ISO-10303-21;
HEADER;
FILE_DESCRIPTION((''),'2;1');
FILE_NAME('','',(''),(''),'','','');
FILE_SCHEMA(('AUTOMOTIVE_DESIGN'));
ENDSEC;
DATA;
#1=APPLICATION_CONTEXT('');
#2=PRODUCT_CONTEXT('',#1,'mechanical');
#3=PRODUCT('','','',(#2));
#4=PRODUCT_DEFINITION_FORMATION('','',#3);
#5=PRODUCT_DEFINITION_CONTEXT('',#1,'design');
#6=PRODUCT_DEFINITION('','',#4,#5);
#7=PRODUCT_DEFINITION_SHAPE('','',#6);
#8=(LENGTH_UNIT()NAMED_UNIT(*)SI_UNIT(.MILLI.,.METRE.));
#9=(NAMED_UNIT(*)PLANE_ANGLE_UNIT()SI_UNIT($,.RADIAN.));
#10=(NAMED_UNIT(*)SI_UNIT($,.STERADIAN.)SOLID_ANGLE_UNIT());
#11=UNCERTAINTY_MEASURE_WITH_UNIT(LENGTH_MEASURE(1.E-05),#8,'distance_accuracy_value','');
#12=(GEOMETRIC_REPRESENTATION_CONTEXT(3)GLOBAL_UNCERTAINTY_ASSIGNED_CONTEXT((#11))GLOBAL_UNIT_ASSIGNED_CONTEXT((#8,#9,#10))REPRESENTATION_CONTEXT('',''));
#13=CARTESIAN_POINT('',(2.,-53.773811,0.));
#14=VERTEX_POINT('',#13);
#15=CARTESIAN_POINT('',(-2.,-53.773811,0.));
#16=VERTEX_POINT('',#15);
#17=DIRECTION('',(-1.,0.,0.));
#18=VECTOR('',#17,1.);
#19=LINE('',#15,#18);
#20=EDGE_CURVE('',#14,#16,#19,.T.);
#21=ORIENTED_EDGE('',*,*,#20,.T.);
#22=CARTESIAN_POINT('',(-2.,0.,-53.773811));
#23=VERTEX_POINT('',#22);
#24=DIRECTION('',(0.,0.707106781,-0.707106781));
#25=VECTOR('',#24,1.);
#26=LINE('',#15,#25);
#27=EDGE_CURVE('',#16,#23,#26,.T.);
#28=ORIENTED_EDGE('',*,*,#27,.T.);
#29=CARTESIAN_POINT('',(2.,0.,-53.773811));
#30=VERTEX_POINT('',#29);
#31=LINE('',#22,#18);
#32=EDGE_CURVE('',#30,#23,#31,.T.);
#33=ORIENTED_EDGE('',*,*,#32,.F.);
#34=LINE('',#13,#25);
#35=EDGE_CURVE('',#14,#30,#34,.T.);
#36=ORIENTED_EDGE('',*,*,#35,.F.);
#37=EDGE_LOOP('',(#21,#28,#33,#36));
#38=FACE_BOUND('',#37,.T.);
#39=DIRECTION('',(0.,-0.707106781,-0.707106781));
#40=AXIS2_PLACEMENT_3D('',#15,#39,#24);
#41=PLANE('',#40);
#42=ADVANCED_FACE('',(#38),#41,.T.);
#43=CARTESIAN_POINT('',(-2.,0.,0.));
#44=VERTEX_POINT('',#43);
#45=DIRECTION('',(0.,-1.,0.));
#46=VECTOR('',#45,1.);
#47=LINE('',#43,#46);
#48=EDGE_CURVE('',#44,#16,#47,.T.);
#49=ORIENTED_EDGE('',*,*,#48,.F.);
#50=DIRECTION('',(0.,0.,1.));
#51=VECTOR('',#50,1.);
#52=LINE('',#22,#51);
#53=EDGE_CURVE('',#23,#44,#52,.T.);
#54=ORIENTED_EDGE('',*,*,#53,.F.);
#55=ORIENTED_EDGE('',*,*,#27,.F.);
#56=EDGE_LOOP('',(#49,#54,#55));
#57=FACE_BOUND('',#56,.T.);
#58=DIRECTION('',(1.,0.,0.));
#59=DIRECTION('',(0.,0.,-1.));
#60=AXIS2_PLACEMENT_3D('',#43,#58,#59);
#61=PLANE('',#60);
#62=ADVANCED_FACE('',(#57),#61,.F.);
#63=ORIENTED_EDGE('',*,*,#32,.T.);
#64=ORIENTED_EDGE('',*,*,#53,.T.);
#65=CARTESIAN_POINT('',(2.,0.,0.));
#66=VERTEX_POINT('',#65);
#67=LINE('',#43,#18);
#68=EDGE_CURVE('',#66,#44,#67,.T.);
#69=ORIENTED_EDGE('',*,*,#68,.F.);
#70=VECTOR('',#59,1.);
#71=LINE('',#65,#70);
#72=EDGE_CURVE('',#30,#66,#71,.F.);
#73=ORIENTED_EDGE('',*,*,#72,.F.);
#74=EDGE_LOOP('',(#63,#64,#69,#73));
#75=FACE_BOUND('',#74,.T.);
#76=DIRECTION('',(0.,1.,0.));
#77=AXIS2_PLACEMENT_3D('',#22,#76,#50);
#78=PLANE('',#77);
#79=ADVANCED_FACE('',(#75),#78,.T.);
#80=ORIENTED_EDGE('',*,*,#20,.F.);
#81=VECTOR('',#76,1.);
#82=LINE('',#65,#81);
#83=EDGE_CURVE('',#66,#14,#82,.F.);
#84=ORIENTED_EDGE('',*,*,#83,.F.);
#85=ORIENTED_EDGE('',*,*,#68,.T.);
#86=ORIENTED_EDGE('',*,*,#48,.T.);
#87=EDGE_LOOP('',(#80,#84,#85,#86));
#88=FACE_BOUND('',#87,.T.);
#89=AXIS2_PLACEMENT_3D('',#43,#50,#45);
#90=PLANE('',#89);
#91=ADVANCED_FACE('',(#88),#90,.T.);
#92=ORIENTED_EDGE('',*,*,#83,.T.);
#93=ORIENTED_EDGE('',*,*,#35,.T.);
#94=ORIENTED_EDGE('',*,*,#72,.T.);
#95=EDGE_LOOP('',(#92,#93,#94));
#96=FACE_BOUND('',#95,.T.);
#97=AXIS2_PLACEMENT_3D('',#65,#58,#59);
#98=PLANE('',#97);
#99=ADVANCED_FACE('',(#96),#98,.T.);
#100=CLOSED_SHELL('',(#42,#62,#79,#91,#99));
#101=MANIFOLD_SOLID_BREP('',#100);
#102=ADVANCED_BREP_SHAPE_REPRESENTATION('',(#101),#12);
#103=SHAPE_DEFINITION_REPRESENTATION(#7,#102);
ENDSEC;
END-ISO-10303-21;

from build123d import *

# Parameters (mm, degrees)
EXTRUDE_1_DEPTH = 2


with BuildPart() as part:
    # Sketch 1 → Бобышка-Вытянуть1 (new, symmetric)
    with BuildSketch(Plane(origin=(0, 0, 0), x_dir=(0, 0, -1), z_dir=(1, 0, 0))):
        Polygon((53.77381068, 0), (0, 0), (0, -53.77381068), align=None)
    extrude(amount=EXTRUDE_1_DEPTH, both=True)


solid = part.part
